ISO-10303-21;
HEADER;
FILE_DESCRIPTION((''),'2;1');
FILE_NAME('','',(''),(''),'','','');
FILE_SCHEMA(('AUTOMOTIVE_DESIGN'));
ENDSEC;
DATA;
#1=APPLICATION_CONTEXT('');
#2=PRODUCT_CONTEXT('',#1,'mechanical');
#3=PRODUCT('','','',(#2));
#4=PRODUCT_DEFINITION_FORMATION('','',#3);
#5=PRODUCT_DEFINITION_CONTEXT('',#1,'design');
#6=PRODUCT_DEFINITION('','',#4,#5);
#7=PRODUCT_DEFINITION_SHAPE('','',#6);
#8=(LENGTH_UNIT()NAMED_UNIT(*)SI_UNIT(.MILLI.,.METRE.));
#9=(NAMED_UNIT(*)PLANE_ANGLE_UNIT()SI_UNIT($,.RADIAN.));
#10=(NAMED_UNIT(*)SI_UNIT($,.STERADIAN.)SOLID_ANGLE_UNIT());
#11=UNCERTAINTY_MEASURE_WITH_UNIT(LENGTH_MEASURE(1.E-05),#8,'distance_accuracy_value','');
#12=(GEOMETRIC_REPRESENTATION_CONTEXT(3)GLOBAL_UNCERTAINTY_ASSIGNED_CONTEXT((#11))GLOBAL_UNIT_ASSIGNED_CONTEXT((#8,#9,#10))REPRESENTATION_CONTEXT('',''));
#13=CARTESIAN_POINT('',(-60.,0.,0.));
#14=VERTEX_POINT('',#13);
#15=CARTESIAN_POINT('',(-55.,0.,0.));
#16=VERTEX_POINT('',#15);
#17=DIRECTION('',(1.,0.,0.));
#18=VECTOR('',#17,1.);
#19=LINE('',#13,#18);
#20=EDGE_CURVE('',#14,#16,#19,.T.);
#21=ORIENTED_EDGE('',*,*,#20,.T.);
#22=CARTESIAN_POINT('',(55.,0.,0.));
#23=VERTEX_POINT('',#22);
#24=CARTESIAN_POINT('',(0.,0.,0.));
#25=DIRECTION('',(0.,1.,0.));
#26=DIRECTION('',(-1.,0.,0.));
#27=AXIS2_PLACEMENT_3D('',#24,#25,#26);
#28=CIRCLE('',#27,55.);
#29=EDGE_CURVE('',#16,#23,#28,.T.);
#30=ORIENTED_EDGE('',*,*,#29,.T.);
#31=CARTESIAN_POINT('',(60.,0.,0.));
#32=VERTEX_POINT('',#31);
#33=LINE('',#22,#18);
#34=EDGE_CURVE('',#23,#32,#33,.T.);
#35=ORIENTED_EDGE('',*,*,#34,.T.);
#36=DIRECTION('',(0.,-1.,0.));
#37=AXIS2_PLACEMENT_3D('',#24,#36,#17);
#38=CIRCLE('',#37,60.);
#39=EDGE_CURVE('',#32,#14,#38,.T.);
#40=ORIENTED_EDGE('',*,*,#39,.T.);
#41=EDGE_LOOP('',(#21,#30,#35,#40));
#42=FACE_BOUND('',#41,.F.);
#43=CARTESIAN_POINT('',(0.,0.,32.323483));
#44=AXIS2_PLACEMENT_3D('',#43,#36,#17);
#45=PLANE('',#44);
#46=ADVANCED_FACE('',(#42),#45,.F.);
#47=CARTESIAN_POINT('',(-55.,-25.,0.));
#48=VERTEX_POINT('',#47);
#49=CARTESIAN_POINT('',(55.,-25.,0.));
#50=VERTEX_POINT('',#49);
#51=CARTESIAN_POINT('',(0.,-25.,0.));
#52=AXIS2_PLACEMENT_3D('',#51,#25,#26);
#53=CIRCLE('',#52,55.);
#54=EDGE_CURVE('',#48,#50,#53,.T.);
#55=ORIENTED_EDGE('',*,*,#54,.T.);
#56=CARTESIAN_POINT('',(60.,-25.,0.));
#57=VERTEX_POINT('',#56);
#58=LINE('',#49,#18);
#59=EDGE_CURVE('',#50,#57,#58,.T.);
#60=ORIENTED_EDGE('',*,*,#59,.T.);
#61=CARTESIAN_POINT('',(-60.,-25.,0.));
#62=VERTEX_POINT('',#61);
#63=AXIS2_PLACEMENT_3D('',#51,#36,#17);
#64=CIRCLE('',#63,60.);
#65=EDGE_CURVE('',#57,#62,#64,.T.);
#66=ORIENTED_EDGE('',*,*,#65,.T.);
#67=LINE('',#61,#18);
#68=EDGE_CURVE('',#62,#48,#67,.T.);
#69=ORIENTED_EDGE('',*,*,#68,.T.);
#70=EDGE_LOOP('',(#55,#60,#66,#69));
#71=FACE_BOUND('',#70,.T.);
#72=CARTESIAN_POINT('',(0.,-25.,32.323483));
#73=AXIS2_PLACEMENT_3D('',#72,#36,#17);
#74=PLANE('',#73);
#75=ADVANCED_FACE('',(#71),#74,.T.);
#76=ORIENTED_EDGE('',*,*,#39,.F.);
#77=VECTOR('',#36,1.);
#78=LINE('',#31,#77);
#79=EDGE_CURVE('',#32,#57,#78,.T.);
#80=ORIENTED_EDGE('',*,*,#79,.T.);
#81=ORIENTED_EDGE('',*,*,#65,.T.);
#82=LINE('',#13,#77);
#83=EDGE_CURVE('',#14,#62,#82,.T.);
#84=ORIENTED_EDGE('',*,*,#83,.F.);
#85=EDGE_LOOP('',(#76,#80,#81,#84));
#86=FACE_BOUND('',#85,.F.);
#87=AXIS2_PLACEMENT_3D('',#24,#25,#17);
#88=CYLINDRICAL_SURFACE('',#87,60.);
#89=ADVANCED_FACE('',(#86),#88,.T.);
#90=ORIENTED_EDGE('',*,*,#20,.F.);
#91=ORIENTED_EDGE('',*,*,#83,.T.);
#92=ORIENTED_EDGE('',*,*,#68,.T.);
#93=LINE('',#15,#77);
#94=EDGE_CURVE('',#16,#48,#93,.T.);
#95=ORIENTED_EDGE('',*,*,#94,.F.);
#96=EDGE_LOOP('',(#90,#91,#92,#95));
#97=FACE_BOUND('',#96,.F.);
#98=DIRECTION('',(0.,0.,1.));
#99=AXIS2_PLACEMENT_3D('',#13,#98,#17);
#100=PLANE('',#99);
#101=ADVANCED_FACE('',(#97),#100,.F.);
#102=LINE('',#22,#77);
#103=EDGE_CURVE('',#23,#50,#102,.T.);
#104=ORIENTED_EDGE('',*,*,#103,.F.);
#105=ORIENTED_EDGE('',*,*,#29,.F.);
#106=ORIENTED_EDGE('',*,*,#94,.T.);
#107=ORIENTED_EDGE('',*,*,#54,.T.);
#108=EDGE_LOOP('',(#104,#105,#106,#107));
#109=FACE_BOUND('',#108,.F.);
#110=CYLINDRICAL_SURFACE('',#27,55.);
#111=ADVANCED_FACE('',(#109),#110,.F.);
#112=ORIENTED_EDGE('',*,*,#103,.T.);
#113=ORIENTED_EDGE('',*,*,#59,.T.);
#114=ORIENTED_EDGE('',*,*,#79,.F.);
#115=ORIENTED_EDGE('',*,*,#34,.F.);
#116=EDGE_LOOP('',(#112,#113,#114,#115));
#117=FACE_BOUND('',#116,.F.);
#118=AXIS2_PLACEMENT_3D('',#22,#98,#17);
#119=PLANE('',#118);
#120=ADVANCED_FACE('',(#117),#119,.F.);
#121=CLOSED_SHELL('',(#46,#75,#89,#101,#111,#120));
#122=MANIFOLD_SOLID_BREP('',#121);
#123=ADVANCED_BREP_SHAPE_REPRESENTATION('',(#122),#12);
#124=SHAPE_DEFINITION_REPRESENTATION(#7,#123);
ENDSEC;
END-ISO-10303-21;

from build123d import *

# Parameters (mm, degrees)
F1_DEPTH = 25


# Not quite as in the source:
# - a feature names something its author has since deleted; it is built from what else it names


with BuildPart() as f1:
    # F0 (on Front) → F1 (new body)
    with BuildSketch(Plane.XZ):
        with BuildLine():
            Line((55, 0), (60, 0))
            ThreePointArc((60, 0), (0, 60), (-60, 0))
            Line((-60, 0), (-55, 0))
            ThreePointArc((-55, 0), (0, 55), (55, 0))
        make_face()
    extrude(amount=F1_DEPTH)


solid = f1.part
